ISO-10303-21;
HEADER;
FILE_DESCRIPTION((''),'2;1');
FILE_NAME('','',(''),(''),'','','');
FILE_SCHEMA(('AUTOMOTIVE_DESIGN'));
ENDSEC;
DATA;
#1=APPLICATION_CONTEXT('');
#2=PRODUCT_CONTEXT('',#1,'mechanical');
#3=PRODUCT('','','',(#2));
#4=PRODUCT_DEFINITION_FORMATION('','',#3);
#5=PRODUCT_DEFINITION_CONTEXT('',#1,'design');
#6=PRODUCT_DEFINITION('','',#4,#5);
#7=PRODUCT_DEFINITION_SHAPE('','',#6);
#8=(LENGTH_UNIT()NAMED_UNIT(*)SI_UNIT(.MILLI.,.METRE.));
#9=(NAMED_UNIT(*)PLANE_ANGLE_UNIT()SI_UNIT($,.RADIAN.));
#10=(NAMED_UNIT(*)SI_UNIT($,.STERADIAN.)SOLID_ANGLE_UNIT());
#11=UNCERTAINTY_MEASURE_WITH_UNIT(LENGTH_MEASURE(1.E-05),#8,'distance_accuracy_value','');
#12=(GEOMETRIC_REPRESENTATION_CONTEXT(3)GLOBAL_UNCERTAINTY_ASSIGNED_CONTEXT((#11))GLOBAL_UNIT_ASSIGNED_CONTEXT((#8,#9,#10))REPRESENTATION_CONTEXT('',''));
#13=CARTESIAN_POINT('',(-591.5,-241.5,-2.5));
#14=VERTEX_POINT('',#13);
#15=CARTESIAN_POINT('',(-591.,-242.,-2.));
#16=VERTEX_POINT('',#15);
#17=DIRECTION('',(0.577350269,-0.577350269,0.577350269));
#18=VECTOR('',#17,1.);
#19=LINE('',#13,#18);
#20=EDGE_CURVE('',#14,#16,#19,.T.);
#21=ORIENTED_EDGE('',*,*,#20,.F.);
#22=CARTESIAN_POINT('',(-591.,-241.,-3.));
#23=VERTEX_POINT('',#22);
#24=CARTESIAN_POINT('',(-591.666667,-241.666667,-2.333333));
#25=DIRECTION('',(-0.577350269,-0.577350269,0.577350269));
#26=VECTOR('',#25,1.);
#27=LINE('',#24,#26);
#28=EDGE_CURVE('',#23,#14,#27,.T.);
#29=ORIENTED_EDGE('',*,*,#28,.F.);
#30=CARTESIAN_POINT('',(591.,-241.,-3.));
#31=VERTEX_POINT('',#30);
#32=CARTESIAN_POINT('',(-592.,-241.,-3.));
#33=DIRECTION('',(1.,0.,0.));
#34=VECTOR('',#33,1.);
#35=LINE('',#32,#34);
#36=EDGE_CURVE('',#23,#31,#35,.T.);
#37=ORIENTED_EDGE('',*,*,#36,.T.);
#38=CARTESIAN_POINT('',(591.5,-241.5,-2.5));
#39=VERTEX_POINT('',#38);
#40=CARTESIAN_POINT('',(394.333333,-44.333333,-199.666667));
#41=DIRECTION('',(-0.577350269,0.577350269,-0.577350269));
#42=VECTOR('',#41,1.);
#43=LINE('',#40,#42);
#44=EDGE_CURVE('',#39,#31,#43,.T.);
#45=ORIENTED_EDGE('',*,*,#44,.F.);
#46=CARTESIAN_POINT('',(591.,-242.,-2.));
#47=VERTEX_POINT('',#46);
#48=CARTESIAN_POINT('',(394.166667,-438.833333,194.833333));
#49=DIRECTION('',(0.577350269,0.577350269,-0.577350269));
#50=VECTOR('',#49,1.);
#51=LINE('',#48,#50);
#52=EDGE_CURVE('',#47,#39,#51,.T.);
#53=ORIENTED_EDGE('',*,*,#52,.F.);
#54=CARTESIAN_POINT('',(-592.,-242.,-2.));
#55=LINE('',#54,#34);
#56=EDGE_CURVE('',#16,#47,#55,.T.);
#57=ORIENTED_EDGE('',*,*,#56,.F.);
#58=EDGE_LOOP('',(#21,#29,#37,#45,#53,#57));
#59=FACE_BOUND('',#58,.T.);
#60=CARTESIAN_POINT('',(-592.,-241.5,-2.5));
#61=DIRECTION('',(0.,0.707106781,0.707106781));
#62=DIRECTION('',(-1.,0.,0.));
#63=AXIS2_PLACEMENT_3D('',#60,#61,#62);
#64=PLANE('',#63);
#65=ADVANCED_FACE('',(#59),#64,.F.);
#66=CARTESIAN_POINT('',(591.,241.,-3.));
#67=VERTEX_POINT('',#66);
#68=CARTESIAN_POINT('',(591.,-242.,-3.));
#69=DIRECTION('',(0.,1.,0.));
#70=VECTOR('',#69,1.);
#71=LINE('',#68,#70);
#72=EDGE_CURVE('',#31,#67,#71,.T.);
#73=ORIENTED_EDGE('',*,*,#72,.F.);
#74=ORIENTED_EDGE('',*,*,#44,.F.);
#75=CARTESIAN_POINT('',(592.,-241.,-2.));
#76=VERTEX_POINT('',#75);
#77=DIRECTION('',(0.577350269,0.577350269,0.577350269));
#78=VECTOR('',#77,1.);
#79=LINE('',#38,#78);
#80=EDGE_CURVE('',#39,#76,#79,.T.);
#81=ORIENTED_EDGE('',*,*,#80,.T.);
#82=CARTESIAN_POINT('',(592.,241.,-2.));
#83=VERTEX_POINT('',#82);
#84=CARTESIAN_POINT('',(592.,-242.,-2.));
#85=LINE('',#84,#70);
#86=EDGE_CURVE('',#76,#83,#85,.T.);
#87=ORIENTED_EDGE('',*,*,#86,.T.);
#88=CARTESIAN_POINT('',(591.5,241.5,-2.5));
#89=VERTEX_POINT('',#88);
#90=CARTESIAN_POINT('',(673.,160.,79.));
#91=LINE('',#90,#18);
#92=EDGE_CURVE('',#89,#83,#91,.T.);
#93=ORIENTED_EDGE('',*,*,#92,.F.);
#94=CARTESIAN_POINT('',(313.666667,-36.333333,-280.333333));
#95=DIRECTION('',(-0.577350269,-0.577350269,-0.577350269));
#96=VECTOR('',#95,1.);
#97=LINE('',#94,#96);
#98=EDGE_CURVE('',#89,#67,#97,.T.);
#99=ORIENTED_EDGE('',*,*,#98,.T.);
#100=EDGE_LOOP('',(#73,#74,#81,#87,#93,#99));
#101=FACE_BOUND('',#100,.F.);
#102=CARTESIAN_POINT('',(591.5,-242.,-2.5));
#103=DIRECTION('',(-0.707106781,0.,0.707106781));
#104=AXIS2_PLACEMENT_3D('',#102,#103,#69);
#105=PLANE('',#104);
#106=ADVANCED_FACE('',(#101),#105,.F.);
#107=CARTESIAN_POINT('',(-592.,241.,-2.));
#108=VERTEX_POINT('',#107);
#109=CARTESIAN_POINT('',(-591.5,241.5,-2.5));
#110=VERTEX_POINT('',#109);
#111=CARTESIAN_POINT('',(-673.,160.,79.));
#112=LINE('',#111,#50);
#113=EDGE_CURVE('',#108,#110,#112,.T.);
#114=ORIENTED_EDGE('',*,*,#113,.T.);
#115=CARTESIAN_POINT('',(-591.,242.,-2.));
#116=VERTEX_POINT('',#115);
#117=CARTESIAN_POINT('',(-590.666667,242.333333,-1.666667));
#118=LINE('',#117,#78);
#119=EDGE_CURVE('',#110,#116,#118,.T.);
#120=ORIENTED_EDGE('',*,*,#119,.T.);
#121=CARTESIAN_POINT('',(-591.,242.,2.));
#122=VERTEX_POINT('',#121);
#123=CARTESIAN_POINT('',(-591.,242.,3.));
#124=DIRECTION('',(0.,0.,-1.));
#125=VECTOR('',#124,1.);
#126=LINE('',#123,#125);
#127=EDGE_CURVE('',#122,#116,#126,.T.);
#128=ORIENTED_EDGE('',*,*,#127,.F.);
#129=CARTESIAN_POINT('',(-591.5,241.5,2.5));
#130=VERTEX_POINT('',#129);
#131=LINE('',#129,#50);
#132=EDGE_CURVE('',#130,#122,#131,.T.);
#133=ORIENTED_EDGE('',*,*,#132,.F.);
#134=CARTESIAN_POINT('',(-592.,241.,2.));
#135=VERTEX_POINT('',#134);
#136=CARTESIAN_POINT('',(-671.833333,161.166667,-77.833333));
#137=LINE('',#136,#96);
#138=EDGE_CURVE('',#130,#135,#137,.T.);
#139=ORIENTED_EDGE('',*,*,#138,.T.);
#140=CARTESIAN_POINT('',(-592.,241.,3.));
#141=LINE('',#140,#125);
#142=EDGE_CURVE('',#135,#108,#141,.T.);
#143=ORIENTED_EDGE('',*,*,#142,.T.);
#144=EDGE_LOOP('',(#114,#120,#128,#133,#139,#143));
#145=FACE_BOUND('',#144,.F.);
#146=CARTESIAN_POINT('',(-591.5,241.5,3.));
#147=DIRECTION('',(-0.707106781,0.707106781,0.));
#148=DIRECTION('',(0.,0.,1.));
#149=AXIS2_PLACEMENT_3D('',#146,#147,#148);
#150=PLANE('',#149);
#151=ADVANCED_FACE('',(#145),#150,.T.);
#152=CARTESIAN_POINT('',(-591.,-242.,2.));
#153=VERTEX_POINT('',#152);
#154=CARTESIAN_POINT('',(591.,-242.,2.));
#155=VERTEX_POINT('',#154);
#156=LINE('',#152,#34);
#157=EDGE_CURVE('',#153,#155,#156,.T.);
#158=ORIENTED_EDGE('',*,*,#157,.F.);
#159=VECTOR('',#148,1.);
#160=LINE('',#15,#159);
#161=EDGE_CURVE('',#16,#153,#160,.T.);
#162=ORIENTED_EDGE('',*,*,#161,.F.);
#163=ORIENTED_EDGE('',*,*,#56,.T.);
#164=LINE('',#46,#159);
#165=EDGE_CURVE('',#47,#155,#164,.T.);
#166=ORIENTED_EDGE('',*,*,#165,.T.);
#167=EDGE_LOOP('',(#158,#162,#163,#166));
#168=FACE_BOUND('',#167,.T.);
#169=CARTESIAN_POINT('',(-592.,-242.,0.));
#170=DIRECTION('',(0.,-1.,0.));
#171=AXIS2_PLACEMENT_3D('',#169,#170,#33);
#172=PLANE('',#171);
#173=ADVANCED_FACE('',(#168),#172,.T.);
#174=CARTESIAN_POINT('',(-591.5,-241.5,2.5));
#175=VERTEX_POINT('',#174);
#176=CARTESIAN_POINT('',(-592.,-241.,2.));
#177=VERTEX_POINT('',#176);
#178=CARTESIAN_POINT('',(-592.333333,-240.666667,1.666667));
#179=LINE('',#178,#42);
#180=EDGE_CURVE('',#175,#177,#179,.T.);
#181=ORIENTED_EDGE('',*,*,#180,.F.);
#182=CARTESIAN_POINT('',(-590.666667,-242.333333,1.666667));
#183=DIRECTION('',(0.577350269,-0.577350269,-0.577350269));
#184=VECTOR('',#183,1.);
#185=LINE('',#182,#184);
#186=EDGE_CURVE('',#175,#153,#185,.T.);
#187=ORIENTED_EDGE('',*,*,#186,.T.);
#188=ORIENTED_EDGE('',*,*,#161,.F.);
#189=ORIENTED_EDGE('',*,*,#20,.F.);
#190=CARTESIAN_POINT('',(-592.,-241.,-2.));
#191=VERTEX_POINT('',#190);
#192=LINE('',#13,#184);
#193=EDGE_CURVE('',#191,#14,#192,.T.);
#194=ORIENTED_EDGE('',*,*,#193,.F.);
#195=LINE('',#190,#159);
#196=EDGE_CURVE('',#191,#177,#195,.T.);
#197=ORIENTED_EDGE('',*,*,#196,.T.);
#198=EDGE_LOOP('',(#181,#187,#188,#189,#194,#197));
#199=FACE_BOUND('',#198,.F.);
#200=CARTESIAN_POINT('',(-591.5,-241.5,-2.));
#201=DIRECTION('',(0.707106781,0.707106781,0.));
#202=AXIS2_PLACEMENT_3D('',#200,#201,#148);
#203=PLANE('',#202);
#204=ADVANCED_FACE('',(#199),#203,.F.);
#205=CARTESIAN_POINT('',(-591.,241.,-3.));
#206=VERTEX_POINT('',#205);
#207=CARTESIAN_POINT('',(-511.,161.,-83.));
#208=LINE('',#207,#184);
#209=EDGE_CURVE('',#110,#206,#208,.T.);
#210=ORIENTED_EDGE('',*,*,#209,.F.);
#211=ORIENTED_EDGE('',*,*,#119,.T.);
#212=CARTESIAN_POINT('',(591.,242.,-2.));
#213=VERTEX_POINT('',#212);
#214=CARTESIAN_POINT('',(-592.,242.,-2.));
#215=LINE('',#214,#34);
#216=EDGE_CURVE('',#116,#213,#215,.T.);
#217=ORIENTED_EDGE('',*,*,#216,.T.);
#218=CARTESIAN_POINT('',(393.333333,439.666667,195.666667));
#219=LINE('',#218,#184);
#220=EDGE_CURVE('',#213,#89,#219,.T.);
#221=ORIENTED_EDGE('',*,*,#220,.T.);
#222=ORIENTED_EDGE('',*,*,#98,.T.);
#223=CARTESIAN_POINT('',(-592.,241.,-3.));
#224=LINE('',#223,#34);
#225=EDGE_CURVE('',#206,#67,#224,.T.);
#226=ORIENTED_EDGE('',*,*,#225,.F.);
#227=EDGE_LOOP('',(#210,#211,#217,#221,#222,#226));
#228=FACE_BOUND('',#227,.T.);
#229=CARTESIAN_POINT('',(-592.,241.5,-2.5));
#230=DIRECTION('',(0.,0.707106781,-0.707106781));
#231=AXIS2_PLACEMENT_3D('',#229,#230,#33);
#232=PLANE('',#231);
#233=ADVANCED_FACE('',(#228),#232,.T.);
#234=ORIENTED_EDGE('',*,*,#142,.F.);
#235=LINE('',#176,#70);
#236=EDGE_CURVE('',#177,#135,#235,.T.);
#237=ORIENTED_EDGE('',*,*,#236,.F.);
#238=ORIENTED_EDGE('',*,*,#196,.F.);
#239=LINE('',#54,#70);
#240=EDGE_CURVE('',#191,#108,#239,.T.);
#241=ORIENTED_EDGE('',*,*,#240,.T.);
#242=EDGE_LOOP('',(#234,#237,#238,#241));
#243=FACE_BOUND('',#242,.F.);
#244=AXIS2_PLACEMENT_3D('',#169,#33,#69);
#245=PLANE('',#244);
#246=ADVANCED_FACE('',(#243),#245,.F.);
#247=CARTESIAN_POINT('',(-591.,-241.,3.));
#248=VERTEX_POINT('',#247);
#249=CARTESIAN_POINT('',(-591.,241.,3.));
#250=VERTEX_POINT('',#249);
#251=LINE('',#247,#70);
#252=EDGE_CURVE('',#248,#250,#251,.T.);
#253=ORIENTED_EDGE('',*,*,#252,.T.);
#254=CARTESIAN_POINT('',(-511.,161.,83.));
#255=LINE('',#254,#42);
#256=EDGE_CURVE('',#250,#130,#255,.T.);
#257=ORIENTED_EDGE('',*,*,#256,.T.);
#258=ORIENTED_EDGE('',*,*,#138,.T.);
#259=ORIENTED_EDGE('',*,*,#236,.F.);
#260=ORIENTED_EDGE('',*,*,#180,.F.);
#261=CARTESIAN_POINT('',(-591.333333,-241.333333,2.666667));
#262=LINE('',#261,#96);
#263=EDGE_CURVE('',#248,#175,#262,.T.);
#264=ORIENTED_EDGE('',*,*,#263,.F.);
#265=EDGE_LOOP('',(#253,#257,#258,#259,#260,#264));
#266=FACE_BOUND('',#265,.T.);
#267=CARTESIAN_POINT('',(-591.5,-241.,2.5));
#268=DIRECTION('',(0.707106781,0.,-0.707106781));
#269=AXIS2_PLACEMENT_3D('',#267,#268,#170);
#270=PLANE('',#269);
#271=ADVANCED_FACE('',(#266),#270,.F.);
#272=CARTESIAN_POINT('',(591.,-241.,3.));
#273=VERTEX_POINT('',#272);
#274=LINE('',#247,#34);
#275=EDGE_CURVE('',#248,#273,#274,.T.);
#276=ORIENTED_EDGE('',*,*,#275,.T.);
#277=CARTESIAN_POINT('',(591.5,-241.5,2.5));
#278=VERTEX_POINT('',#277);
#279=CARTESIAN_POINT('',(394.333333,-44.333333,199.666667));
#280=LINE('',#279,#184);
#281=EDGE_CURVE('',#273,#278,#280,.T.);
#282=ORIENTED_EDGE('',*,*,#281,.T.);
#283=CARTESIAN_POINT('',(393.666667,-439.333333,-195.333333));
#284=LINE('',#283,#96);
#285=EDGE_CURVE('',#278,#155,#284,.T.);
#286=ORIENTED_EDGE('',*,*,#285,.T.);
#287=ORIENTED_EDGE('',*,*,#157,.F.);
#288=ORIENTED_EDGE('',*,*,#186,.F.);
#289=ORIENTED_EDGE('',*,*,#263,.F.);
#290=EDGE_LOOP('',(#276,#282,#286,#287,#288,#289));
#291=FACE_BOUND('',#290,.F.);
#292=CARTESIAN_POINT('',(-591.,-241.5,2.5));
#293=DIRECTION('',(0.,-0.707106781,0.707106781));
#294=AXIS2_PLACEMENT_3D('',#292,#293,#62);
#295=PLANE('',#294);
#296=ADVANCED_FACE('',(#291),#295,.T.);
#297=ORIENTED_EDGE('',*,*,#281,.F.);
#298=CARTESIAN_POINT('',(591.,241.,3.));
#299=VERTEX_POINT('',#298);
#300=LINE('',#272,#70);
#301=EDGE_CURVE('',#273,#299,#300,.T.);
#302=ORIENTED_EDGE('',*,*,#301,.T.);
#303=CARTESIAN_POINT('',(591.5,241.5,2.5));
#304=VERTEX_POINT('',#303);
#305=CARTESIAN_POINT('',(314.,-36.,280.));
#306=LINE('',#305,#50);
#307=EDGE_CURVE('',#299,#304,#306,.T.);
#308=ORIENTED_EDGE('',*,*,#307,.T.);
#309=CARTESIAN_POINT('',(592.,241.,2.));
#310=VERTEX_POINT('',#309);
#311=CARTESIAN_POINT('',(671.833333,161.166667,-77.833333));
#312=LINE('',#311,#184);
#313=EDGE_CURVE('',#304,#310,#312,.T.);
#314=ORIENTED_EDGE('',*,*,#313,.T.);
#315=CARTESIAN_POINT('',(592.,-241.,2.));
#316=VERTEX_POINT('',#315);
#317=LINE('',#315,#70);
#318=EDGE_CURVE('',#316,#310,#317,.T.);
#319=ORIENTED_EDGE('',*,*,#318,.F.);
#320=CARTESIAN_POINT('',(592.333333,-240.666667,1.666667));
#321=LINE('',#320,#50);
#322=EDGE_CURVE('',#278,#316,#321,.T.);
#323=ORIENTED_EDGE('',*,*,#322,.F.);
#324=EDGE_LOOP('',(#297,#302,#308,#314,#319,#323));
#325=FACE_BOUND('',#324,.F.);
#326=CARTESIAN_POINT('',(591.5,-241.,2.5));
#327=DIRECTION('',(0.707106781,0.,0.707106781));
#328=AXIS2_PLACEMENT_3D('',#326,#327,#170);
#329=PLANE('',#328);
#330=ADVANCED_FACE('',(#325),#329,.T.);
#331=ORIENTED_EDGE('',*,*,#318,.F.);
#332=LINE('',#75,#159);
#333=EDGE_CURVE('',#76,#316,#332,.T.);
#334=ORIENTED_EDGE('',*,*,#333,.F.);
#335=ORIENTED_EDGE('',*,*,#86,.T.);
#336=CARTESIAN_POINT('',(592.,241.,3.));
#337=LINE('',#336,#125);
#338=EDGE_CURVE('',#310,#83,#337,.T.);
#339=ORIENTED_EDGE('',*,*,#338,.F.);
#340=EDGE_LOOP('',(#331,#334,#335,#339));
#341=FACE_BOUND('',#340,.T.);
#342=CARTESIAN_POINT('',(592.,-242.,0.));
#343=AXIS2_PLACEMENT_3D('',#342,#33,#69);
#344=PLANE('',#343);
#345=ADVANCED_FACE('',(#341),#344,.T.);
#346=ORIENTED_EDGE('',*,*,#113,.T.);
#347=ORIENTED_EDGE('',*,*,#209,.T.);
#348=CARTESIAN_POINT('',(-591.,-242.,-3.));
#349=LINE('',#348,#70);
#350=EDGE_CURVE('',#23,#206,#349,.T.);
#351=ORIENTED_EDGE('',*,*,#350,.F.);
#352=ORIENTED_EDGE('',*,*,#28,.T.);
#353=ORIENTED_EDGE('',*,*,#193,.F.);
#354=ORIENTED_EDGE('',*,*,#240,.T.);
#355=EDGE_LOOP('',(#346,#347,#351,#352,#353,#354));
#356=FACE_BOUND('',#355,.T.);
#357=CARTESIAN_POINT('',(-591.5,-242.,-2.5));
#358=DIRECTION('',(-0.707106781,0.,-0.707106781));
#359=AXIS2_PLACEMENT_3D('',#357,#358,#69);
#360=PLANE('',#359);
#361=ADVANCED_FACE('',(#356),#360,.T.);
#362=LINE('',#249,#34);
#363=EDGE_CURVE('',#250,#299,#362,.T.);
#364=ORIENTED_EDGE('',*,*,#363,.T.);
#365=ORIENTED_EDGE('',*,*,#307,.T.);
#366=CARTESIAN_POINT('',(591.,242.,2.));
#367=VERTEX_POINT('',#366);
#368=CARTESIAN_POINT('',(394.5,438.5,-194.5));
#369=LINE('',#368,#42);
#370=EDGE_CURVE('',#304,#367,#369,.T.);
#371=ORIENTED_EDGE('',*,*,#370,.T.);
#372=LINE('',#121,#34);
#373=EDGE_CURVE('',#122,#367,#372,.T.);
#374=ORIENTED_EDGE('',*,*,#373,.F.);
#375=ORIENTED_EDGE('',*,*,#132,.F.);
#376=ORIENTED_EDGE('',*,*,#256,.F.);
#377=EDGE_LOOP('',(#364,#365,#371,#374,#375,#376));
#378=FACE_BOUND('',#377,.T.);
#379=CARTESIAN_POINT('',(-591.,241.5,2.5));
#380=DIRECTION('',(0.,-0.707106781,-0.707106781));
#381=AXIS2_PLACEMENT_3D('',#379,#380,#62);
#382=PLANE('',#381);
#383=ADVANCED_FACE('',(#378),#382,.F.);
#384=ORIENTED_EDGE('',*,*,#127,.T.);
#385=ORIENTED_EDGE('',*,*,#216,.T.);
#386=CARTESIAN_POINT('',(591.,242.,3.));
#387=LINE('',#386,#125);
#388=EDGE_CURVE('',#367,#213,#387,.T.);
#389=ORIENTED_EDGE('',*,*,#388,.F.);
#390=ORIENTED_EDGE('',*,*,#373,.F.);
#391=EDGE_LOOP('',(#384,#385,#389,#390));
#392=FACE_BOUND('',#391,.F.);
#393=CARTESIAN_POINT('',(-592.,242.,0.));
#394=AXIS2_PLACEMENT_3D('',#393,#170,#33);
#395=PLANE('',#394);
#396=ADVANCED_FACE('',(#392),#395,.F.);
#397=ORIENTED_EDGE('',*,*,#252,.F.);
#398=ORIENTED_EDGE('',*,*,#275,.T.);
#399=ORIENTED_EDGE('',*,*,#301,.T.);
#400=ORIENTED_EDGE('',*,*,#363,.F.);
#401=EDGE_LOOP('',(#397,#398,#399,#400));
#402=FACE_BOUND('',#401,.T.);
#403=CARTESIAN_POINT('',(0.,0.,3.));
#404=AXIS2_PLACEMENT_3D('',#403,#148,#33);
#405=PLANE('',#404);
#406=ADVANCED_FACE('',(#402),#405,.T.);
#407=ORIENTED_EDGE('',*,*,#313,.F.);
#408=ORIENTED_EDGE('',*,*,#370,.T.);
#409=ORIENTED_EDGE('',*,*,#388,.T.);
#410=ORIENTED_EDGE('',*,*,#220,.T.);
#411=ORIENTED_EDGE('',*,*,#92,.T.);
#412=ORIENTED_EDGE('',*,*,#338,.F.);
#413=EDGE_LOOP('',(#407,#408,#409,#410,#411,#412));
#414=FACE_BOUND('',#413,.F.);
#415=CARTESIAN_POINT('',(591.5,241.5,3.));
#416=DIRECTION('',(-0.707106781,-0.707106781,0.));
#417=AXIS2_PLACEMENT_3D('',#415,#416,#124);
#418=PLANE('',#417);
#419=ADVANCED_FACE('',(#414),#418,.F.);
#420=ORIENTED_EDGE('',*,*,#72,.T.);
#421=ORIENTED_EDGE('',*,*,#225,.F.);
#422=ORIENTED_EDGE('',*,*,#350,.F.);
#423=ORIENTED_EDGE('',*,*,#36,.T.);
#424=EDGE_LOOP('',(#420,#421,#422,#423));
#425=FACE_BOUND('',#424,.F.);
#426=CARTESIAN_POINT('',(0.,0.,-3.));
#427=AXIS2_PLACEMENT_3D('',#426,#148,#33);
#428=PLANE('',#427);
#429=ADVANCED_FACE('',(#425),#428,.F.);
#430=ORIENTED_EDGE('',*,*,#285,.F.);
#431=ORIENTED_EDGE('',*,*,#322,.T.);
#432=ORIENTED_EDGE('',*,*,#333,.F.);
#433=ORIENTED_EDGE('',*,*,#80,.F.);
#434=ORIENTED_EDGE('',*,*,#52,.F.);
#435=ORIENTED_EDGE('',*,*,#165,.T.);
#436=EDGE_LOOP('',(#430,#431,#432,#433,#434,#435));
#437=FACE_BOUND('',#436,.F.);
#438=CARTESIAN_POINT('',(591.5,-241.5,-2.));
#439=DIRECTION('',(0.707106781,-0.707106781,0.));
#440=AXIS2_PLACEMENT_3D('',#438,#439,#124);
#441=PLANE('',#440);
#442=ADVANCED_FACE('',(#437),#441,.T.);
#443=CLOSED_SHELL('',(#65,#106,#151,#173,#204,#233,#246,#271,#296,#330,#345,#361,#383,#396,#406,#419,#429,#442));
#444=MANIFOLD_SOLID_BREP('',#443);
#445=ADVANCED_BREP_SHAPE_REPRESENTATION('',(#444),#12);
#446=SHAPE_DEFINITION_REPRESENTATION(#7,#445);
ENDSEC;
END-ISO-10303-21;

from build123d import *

# Parameters (mm, degrees)
F0_W     = 1184
F0_H     = 484
F1_DEPTH = 3
F2_SIZE  = 1
F3_SIZE  = 1
F4_SIZE  = 1
F5_SIZE  = 1
F6_SIZE  = 1
F7_SIZE  = 1


with BuildPart() as f1:
    # F0 (on Top) → F1 (new body, symmetric)
    with BuildSketch(Plane.XY):
        Rectangle(F0_W, F0_H)
    extrude(amount=F1_DEPTH, both=True)

    # F2
    f2_edges = [f1.edges().sort_by_distance(p)[0] for p in [
        (592, 0, -3),
        (0, -242, -3),
        (-592, 0, -3),
        (0, 242, -3),
    ]]
    chamfer(f2_edges, length=F2_SIZE)

    # F3
    f3_edges = [f1.edges().sort_by_distance(p)[0] for p in [
        (592, -242, 0.5),
    ]]
    chamfer(f3_edges, length=F3_SIZE)

    # F4
    f4_edges = [f1.edges().sort_by_distance(p)[0] for p in [
        (-592, 242, 0.5),
    ]]
    chamfer(f4_edges, length=F4_SIZE)

    # F5
    f5_edges = [f1.edges().sort_by_distance(p)[0] for p in [
        (-592, -242, 0.5),
    ]]
    chamfer(f5_edges, length=F5_SIZE)

    # F6
    f6_edges = [f1.edges().sort_by_distance(p)[0] for p in [
        (592, 242, 0.5),
    ]]
    chamfer(f6_edges, length=F6_SIZE)

    # F7 (call 1 of 4: OpenCascade refuses the feature's edges together)
    f7_edges = [f1.edges().sort_by_distance(p)[0] for p in [
        (0, -242, 3),
    ]]
    chamfer(f7_edges, length=F7_SIZE)

    # F7#2 (call 2 of 4)
    f7_2_edges = [f1.edges().sort_by_distance(p)[0] for p in [
        (592, 0, 3),
    ]]
    chamfer(f7_2_edges, length=F7_SIZE)

    # F7#3 (call 3 of 4)
    f7_3_edges = [f1.edges().sort_by_distance(p)[0] for p in [
        (0, 242, 3),
    ]]
    chamfer(f7_3_edges, length=F7_SIZE)

    # F7#4 (call 4 of 4)
    f7_4_edges = [f1.edges().sort_by_distance(p)[0] for p in [
        (-592, 0, 3),
    ]]
    chamfer(f7_4_edges, length=F7_SIZE)


solid = f1.part
